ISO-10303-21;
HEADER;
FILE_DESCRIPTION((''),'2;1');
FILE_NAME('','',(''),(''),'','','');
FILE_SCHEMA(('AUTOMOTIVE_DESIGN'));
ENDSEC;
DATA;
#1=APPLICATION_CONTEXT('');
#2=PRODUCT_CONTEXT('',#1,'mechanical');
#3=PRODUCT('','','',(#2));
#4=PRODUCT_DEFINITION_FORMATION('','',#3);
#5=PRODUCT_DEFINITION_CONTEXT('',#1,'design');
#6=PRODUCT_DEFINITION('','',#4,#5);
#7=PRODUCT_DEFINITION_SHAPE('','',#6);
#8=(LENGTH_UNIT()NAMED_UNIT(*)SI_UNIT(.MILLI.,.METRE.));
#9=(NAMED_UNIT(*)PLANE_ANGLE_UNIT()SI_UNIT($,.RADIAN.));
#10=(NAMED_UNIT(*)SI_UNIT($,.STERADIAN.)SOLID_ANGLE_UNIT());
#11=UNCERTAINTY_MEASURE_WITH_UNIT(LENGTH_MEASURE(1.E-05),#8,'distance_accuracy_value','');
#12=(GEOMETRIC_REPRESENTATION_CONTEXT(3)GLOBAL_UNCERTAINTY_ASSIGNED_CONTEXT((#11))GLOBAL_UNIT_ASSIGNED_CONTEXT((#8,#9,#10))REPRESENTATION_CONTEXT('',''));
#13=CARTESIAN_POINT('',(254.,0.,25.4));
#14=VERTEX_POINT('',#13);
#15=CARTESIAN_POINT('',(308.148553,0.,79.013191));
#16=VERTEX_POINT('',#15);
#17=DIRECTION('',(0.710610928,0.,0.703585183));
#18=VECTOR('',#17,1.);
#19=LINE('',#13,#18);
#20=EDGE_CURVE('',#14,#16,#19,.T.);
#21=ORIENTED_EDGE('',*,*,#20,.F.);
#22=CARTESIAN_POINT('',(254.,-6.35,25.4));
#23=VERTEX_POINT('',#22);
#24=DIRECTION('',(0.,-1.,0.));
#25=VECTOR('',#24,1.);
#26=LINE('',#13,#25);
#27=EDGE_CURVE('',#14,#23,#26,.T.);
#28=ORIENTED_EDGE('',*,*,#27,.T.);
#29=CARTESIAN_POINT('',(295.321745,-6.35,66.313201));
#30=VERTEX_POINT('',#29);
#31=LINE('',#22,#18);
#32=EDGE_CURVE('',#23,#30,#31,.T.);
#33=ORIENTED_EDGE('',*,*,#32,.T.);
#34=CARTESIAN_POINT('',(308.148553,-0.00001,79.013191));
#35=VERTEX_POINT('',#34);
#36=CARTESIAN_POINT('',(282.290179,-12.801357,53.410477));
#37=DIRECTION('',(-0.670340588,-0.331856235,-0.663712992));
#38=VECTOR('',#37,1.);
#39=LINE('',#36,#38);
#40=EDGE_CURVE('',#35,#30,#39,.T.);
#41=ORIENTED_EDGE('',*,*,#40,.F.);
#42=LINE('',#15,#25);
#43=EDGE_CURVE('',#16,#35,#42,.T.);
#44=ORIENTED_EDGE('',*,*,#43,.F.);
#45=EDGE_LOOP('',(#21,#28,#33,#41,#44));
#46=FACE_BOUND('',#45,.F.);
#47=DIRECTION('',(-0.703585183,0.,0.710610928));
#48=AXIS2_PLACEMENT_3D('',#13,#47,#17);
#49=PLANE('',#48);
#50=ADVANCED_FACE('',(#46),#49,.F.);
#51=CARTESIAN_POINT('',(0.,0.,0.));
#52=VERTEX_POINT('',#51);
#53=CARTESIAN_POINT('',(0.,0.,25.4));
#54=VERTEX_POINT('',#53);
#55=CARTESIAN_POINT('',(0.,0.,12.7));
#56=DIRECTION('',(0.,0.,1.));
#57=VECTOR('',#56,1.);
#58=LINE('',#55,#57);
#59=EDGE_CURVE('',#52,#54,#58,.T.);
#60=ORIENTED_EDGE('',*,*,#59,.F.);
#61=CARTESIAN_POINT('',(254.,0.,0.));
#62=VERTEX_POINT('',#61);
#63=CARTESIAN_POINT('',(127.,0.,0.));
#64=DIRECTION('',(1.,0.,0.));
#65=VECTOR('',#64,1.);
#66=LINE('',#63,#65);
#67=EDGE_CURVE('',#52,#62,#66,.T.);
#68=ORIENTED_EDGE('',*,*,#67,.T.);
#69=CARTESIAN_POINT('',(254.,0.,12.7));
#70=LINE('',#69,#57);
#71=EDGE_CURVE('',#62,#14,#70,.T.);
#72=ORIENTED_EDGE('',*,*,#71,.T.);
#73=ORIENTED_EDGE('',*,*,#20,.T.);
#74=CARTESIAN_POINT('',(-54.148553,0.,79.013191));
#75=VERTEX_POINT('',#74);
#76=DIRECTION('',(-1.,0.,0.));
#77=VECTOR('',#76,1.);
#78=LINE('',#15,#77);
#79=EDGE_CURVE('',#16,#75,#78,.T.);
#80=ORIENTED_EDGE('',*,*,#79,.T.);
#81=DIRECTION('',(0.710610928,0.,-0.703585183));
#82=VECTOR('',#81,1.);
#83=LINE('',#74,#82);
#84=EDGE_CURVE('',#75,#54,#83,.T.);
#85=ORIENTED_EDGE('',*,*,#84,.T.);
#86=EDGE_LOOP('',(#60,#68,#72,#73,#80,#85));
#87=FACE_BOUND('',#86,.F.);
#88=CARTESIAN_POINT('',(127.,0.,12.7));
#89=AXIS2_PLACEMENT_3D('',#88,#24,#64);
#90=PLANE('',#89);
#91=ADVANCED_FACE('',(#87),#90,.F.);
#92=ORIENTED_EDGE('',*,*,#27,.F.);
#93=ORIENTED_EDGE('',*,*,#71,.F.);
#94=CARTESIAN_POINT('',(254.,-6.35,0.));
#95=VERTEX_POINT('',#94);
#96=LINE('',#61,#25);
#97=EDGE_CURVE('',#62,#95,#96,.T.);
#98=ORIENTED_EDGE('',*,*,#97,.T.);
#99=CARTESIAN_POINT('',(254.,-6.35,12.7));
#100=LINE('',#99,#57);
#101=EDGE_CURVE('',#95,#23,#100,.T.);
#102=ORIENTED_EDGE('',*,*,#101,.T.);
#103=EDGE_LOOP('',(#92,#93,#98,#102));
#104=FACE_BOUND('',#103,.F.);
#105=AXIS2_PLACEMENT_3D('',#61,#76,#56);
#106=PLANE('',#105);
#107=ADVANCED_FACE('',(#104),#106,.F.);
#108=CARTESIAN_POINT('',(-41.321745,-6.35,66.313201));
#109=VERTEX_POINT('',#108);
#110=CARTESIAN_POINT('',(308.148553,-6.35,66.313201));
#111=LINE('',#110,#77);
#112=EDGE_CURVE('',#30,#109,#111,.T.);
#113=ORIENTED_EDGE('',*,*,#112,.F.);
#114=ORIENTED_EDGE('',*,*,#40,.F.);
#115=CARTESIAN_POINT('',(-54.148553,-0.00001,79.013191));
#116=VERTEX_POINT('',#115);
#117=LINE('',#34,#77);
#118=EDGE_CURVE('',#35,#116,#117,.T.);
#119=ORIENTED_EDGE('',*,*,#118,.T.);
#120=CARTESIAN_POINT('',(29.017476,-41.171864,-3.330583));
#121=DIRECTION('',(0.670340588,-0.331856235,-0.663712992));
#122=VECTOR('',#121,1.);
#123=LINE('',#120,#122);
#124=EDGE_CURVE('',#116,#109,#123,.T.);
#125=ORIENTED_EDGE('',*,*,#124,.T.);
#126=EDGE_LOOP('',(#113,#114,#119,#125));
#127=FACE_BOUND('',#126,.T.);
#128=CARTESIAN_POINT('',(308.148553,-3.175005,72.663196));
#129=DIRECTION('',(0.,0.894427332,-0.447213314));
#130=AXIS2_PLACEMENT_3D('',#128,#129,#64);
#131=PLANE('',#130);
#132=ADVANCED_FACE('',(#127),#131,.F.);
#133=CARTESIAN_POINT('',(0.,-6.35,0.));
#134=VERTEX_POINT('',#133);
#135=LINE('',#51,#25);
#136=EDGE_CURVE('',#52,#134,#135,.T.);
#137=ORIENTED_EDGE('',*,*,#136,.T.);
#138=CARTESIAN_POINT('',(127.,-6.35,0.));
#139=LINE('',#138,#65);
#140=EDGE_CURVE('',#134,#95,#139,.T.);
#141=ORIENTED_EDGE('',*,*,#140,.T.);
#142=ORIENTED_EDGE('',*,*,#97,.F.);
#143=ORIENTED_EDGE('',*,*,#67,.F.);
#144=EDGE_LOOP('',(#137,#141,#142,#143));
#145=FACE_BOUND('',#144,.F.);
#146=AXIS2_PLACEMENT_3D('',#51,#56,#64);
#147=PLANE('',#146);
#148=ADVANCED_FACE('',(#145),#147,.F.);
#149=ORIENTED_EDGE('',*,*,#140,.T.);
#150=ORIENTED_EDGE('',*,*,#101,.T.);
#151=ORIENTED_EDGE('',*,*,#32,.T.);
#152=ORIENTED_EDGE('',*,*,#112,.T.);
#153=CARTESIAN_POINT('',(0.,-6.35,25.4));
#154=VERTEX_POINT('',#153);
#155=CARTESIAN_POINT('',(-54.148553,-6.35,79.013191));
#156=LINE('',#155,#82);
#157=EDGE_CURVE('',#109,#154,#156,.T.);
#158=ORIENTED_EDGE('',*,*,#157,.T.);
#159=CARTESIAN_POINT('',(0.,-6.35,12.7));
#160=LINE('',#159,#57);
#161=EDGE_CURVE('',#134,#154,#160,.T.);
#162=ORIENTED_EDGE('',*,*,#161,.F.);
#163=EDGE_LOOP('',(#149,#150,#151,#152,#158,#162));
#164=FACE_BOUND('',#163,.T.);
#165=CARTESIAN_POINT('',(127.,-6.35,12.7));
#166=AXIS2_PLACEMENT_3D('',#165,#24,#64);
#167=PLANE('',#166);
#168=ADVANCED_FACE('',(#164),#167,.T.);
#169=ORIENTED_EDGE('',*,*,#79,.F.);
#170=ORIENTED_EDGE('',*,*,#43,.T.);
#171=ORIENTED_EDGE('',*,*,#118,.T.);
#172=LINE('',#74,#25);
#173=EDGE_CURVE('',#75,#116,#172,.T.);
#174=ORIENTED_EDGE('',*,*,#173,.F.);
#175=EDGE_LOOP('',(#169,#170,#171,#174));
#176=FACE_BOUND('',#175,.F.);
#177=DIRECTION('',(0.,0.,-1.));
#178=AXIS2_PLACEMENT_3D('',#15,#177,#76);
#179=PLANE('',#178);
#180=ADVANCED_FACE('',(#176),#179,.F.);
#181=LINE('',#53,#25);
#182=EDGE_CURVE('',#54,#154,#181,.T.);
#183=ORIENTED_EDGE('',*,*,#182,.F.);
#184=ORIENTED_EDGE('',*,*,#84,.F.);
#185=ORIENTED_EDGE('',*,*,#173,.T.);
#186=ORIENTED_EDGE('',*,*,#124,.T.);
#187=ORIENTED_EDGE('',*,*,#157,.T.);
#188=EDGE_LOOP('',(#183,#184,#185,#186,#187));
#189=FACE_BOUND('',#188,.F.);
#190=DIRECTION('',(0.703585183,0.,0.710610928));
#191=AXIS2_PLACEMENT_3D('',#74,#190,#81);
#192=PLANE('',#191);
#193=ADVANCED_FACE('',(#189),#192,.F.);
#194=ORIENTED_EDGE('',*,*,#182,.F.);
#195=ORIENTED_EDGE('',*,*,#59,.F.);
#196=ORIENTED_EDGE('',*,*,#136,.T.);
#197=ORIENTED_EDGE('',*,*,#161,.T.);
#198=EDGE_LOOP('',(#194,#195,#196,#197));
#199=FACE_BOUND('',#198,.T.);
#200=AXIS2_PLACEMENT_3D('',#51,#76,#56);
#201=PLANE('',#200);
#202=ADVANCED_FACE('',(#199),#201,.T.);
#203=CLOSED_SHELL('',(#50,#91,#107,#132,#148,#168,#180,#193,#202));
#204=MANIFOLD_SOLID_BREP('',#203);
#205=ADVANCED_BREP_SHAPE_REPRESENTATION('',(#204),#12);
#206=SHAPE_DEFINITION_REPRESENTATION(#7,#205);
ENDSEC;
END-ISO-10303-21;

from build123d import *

# Parameters (mm, degrees)
F0_W     = 254
F0_H     = 25.4
F1_DEPTH = 6.35
F2_SIZE2 = 12.69999
F2_SIZE  = 6.34999


# Not quite as in the source:
# - a fillet or chamfer is up to 0.001 mm smaller than in the source, because OpenCascade refuses the exact size


with BuildPart() as f1:
    # F0 (on Front) → F1 (new body)
    with BuildSketch(Plane.XZ):
        with Locations((127, 12.7)):
            Rectangle(F0_W, F0_H)
        Polygon((-54.1485526787, 79.0131909403), (0, 25.4), (254, 25.4), (308.1485526787, 79.0131909403), align=None)
    extrude(amount=F1_DEPTH)

    # F2 (size 6.35 and 12.7 in the source; OpenCascade refuses exactly that, so slightly less here)
    f2_edges = [f1.edges().sort_by_distance(p)[0] for p in [
        (127, -6.35, 79.013191),
    ]]
    f2_side = f1.faces().sort_by_distance((127, -3.175, 79.013191))[0]
    chamfer(f2_edges, length=F2_SIZE, length2=F2_SIZE2, reference=f2_side)


solid = f1.part
